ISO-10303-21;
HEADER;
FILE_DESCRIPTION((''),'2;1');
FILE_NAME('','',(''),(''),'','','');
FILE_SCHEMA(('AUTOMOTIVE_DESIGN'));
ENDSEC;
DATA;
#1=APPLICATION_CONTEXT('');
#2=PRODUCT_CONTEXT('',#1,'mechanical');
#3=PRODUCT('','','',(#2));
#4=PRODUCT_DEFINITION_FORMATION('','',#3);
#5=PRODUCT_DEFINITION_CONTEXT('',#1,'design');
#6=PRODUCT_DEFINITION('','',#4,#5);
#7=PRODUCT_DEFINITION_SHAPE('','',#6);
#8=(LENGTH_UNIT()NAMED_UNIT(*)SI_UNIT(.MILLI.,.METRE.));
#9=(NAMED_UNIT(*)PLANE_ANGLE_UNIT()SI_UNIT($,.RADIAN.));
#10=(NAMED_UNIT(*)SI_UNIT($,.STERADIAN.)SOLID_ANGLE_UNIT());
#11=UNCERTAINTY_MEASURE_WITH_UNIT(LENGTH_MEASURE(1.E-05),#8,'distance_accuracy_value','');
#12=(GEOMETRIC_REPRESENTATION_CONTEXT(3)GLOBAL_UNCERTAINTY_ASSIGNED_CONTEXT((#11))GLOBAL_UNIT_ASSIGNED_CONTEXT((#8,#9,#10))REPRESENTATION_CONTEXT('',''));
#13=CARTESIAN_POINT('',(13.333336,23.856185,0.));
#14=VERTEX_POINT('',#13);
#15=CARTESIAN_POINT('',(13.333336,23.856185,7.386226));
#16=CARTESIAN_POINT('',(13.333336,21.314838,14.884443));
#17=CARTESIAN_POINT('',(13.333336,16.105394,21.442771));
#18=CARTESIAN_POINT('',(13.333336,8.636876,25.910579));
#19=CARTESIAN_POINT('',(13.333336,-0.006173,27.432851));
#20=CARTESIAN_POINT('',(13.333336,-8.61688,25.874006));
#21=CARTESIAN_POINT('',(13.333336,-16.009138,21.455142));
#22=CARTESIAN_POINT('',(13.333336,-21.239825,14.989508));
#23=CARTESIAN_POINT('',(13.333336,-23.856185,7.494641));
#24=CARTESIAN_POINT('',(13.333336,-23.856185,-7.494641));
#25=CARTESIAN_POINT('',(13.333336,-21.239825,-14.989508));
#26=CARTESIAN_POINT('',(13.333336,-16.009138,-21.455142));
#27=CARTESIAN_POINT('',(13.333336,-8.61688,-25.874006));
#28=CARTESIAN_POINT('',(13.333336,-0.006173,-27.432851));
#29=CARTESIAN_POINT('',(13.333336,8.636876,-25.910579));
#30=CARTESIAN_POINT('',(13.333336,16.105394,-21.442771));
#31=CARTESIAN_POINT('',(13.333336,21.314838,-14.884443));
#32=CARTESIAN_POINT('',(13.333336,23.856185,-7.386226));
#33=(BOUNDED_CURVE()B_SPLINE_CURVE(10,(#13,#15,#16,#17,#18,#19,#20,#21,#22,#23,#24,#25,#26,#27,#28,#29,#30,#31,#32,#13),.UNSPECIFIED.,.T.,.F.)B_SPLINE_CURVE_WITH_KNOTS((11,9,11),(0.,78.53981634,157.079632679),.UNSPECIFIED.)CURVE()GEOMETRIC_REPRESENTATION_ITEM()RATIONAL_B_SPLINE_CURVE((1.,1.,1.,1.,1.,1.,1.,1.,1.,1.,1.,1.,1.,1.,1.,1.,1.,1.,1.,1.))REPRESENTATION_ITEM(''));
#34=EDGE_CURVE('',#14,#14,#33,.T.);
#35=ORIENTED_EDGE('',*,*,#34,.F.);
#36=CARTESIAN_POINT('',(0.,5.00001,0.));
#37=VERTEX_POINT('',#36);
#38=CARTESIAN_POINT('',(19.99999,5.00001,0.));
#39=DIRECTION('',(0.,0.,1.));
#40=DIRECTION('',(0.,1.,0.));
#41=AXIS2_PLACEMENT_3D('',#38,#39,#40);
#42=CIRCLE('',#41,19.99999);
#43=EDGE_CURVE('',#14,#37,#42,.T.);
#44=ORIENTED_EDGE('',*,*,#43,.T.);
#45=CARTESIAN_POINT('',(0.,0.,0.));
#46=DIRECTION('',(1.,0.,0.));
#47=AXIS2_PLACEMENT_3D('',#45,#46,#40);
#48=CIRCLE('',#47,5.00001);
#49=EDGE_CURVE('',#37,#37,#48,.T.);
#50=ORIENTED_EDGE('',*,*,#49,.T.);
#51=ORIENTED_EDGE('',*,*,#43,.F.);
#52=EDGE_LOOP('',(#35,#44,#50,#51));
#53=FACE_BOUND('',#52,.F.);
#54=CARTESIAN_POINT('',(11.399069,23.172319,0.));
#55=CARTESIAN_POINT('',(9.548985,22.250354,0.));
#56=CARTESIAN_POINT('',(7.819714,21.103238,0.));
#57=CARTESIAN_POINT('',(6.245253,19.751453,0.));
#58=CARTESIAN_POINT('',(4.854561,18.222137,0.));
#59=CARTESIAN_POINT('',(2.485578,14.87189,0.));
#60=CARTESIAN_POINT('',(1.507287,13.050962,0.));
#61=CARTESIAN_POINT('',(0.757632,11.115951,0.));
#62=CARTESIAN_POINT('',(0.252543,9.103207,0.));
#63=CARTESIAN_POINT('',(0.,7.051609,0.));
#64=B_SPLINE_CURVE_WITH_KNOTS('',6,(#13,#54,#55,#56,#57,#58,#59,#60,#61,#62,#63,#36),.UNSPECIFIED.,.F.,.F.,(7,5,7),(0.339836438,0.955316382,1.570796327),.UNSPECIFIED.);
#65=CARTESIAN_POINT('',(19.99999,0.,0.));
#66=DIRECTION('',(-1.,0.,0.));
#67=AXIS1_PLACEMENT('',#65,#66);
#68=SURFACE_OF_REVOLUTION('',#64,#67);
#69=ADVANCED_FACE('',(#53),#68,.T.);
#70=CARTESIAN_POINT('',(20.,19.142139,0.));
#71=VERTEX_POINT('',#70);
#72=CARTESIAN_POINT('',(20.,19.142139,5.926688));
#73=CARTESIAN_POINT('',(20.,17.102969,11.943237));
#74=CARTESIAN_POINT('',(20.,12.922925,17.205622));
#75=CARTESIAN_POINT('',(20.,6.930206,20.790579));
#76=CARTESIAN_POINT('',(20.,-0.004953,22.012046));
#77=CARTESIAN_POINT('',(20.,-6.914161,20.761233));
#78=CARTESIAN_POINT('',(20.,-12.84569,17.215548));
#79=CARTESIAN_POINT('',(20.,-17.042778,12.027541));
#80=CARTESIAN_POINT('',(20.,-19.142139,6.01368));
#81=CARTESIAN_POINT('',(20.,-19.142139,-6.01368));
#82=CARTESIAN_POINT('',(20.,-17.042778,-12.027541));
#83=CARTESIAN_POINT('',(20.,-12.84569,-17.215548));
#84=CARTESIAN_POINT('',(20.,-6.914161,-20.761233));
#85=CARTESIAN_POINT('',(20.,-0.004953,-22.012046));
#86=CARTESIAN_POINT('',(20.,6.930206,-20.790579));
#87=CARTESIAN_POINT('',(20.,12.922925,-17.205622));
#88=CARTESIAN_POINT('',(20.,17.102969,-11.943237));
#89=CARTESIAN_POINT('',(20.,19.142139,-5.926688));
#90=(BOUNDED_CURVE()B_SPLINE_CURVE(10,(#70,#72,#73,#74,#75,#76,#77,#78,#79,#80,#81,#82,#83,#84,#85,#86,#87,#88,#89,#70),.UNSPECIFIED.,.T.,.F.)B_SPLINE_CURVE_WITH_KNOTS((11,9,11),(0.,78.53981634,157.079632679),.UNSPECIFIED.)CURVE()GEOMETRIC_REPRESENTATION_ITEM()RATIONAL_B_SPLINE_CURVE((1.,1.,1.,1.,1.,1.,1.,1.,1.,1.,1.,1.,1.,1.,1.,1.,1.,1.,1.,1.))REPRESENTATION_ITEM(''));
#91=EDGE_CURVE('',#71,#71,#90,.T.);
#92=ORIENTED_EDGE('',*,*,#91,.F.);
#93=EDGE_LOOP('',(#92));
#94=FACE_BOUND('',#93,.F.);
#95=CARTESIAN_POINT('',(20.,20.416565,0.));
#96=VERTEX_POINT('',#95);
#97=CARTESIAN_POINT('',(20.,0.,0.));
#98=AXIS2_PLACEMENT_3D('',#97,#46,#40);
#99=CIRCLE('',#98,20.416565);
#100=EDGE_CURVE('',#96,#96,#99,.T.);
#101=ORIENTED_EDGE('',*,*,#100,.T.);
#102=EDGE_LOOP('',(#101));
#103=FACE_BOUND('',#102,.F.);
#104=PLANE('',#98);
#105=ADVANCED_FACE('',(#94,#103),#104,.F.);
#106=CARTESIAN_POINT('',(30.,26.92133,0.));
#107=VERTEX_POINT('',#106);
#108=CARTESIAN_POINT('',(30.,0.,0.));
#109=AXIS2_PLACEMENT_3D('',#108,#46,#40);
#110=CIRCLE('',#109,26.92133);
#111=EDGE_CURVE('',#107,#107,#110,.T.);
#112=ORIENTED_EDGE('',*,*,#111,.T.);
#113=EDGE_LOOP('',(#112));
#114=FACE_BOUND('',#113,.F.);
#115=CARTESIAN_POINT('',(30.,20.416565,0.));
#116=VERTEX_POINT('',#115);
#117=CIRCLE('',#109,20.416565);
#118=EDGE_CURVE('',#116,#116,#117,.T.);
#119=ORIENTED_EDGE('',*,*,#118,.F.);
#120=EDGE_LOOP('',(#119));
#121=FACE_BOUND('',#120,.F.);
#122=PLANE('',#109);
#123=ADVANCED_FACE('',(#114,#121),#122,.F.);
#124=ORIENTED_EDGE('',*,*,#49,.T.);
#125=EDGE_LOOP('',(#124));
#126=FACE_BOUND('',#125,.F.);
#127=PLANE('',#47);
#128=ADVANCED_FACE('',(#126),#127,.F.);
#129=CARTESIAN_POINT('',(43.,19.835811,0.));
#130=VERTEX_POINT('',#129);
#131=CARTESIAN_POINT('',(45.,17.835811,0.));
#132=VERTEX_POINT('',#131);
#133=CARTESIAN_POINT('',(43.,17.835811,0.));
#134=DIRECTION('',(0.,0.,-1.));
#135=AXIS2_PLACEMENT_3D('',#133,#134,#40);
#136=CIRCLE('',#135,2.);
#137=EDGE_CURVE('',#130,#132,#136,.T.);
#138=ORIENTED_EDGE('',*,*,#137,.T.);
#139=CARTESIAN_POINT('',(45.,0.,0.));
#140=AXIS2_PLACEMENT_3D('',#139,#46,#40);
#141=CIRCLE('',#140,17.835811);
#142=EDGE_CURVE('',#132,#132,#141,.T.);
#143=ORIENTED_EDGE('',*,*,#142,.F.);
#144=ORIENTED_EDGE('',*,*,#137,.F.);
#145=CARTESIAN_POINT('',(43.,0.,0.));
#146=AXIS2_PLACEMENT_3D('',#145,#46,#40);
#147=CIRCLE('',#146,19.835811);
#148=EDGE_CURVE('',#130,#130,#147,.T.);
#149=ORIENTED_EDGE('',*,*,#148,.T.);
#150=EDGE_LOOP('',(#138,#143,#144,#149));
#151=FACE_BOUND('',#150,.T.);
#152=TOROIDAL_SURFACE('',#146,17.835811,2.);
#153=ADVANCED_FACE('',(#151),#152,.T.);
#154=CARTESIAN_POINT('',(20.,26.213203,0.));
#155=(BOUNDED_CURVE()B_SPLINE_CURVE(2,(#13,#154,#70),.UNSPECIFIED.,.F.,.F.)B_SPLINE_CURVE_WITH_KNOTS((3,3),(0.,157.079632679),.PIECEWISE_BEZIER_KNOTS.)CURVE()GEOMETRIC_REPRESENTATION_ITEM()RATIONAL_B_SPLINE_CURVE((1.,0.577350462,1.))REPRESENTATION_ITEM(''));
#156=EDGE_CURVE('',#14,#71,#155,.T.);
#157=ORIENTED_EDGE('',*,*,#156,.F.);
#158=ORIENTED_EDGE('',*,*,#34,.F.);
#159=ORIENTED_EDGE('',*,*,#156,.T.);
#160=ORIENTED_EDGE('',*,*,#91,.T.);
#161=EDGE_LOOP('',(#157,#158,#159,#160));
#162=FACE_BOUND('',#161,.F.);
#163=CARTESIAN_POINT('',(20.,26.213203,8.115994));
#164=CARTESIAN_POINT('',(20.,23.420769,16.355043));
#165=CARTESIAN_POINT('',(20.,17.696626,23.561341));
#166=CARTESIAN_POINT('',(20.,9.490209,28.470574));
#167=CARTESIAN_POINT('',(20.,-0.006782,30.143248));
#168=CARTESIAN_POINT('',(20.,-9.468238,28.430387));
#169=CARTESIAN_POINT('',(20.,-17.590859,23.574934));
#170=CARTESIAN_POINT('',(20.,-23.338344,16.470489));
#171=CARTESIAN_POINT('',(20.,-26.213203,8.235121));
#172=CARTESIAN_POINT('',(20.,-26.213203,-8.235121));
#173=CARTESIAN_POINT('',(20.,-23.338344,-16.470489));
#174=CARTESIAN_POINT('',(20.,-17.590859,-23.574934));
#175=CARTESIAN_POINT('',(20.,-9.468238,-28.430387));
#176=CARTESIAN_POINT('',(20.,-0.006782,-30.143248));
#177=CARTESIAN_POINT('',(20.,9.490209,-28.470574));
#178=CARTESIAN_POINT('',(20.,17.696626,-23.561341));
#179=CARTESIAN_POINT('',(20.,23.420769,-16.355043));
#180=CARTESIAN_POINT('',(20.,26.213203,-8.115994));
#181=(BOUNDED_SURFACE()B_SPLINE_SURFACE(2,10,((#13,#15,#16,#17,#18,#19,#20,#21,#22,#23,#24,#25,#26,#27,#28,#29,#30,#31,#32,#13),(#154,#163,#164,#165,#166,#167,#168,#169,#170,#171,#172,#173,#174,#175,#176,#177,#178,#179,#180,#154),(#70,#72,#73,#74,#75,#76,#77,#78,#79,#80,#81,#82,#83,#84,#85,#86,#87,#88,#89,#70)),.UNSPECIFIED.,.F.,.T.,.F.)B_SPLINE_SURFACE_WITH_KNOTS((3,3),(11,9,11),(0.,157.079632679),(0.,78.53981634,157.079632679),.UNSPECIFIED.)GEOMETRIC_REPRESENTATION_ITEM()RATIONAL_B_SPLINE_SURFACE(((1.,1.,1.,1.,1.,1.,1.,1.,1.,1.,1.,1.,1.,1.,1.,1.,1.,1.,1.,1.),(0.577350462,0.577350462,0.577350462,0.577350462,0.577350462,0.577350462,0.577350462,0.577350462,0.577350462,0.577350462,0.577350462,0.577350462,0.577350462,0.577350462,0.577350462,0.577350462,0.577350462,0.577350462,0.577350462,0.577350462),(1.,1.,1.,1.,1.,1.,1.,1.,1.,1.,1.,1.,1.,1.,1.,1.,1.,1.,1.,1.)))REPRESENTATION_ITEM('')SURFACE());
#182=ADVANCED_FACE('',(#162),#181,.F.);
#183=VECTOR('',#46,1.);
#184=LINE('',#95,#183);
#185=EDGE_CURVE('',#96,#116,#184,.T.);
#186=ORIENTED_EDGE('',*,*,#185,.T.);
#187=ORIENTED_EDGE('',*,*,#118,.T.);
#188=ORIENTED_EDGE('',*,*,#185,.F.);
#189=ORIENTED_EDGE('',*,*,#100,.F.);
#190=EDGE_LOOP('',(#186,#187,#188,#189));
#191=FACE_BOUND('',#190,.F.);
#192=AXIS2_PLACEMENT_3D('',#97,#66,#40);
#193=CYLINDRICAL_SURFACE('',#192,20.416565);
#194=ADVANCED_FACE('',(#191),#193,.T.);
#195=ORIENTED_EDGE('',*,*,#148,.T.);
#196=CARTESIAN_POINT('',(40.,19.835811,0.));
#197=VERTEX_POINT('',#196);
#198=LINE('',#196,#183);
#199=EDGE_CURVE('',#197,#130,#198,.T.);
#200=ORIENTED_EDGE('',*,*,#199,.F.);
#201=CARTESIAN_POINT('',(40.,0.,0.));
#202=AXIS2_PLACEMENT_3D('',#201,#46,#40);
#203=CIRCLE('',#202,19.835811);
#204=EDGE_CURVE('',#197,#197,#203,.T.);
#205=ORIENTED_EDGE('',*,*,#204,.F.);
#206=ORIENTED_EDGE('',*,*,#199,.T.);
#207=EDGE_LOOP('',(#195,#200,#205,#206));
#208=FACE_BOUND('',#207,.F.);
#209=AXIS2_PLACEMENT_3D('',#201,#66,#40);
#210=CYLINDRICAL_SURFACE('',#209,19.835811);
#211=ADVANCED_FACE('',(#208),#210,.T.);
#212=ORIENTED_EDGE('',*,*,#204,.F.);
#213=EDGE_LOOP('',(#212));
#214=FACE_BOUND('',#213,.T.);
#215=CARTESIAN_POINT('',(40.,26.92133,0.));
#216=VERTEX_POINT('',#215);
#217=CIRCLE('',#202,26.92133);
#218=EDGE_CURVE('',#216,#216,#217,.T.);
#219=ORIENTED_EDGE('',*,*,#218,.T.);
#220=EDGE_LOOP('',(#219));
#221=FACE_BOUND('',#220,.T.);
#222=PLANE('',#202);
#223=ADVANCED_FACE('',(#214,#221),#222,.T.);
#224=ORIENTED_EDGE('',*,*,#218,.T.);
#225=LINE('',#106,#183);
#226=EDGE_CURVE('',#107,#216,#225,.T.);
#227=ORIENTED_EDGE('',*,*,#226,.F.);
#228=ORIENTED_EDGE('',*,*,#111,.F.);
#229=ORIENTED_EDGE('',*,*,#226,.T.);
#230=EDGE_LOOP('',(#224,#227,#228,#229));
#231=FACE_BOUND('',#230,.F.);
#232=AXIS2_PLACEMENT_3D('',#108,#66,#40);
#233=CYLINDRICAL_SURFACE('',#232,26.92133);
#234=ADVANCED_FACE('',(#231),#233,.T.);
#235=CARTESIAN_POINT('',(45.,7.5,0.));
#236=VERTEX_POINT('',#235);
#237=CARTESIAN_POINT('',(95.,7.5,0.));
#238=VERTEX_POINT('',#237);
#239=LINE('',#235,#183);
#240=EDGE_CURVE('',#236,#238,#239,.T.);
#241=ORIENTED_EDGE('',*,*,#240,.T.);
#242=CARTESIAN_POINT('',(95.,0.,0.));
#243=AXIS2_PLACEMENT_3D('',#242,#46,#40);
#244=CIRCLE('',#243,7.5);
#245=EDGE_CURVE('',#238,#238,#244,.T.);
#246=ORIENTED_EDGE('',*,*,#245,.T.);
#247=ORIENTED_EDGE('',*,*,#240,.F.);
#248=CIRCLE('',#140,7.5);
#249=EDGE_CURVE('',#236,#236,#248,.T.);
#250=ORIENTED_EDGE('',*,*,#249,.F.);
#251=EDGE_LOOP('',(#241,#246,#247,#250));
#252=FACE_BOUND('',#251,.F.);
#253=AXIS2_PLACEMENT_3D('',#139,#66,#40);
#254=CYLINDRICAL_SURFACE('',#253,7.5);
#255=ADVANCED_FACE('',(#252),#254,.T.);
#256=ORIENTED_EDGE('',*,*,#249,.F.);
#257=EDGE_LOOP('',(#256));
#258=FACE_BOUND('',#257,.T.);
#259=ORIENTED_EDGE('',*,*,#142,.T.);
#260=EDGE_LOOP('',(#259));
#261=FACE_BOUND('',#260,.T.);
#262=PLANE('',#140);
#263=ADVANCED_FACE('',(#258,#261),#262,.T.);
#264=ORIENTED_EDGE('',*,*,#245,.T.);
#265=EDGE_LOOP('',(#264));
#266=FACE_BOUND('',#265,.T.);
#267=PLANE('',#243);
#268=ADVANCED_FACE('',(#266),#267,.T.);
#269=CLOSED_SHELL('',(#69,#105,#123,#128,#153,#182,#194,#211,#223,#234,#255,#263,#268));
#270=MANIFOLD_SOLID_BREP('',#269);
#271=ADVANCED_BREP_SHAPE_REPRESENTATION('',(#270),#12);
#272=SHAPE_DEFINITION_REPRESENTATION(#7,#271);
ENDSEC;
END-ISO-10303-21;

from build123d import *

# Parameters (mm, degrees)
F0_R      = 25
F1_DEPTH  = 20
F2_R      = 19.99999
F3_R      = 5
F4_R      = 20.4165647278
F5_DEPTH  = 10
F6_R      = 26.9213297652
F7_DEPTH  = 10
F8_R      = 19.8358108325
F9_DEPTH  = 5
F10_R     = 2
F11_R     = 7.5
F12_DEPTH = 50


# Not quite as in the source:
# - a fillet or chamfer is up to 0.001 mm smaller than in the source, because OpenCascade refuses the exact size


with BuildPart() as f1:
    # F0 (on Right) → F1 (new body)
    with BuildSketch(Plane.YZ):
        Circle(F0_R)
    extrude(amount=F1_DEPTH)

    # F2 (radius 20 in the source; OpenCascade refuses exactly that, so slightly less here)
    f2_edges = [f1.edges().sort_by_distance(p)[0] for p in [
        (0, -25, 0),
    ]]
    fillet(f2_edges, radius=F2_R)

    # F3
    f3_edges = [f1.edges().sort_by_distance(p)[0] for p in [
        (20, -25, 0),
    ]]
    fillet(f3_edges, radius=F3_R)

    # F4 (on face) → F5 (join)
    with BuildSketch(Plane.YZ.offset(20)):
        Circle(F4_R)
    extrude(amount=F5_DEPTH)

    # F6 (on face) → F7 (join)
    with BuildSketch(Plane.YZ.offset(30)):
        Circle(F6_R)
    extrude(amount=F7_DEPTH)

    # F8 (on face) → F9 (join)
    with BuildSketch(Plane.YZ.offset(40)):
        Circle(F8_R)
    extrude(amount=F9_DEPTH)

    # F10
    f10_edges = [f1.edges().sort_by_distance(p)[0] for p in [
        (45, -19.835811, 0),
    ]]
    fillet(f10_edges, radius=F10_R)

    # F11 (on face) → F12 (join)
    with BuildSketch(Plane.YZ.offset(45)):
        Circle(F11_R)
    extrude(amount=F12_DEPTH)


solid = f1.part
